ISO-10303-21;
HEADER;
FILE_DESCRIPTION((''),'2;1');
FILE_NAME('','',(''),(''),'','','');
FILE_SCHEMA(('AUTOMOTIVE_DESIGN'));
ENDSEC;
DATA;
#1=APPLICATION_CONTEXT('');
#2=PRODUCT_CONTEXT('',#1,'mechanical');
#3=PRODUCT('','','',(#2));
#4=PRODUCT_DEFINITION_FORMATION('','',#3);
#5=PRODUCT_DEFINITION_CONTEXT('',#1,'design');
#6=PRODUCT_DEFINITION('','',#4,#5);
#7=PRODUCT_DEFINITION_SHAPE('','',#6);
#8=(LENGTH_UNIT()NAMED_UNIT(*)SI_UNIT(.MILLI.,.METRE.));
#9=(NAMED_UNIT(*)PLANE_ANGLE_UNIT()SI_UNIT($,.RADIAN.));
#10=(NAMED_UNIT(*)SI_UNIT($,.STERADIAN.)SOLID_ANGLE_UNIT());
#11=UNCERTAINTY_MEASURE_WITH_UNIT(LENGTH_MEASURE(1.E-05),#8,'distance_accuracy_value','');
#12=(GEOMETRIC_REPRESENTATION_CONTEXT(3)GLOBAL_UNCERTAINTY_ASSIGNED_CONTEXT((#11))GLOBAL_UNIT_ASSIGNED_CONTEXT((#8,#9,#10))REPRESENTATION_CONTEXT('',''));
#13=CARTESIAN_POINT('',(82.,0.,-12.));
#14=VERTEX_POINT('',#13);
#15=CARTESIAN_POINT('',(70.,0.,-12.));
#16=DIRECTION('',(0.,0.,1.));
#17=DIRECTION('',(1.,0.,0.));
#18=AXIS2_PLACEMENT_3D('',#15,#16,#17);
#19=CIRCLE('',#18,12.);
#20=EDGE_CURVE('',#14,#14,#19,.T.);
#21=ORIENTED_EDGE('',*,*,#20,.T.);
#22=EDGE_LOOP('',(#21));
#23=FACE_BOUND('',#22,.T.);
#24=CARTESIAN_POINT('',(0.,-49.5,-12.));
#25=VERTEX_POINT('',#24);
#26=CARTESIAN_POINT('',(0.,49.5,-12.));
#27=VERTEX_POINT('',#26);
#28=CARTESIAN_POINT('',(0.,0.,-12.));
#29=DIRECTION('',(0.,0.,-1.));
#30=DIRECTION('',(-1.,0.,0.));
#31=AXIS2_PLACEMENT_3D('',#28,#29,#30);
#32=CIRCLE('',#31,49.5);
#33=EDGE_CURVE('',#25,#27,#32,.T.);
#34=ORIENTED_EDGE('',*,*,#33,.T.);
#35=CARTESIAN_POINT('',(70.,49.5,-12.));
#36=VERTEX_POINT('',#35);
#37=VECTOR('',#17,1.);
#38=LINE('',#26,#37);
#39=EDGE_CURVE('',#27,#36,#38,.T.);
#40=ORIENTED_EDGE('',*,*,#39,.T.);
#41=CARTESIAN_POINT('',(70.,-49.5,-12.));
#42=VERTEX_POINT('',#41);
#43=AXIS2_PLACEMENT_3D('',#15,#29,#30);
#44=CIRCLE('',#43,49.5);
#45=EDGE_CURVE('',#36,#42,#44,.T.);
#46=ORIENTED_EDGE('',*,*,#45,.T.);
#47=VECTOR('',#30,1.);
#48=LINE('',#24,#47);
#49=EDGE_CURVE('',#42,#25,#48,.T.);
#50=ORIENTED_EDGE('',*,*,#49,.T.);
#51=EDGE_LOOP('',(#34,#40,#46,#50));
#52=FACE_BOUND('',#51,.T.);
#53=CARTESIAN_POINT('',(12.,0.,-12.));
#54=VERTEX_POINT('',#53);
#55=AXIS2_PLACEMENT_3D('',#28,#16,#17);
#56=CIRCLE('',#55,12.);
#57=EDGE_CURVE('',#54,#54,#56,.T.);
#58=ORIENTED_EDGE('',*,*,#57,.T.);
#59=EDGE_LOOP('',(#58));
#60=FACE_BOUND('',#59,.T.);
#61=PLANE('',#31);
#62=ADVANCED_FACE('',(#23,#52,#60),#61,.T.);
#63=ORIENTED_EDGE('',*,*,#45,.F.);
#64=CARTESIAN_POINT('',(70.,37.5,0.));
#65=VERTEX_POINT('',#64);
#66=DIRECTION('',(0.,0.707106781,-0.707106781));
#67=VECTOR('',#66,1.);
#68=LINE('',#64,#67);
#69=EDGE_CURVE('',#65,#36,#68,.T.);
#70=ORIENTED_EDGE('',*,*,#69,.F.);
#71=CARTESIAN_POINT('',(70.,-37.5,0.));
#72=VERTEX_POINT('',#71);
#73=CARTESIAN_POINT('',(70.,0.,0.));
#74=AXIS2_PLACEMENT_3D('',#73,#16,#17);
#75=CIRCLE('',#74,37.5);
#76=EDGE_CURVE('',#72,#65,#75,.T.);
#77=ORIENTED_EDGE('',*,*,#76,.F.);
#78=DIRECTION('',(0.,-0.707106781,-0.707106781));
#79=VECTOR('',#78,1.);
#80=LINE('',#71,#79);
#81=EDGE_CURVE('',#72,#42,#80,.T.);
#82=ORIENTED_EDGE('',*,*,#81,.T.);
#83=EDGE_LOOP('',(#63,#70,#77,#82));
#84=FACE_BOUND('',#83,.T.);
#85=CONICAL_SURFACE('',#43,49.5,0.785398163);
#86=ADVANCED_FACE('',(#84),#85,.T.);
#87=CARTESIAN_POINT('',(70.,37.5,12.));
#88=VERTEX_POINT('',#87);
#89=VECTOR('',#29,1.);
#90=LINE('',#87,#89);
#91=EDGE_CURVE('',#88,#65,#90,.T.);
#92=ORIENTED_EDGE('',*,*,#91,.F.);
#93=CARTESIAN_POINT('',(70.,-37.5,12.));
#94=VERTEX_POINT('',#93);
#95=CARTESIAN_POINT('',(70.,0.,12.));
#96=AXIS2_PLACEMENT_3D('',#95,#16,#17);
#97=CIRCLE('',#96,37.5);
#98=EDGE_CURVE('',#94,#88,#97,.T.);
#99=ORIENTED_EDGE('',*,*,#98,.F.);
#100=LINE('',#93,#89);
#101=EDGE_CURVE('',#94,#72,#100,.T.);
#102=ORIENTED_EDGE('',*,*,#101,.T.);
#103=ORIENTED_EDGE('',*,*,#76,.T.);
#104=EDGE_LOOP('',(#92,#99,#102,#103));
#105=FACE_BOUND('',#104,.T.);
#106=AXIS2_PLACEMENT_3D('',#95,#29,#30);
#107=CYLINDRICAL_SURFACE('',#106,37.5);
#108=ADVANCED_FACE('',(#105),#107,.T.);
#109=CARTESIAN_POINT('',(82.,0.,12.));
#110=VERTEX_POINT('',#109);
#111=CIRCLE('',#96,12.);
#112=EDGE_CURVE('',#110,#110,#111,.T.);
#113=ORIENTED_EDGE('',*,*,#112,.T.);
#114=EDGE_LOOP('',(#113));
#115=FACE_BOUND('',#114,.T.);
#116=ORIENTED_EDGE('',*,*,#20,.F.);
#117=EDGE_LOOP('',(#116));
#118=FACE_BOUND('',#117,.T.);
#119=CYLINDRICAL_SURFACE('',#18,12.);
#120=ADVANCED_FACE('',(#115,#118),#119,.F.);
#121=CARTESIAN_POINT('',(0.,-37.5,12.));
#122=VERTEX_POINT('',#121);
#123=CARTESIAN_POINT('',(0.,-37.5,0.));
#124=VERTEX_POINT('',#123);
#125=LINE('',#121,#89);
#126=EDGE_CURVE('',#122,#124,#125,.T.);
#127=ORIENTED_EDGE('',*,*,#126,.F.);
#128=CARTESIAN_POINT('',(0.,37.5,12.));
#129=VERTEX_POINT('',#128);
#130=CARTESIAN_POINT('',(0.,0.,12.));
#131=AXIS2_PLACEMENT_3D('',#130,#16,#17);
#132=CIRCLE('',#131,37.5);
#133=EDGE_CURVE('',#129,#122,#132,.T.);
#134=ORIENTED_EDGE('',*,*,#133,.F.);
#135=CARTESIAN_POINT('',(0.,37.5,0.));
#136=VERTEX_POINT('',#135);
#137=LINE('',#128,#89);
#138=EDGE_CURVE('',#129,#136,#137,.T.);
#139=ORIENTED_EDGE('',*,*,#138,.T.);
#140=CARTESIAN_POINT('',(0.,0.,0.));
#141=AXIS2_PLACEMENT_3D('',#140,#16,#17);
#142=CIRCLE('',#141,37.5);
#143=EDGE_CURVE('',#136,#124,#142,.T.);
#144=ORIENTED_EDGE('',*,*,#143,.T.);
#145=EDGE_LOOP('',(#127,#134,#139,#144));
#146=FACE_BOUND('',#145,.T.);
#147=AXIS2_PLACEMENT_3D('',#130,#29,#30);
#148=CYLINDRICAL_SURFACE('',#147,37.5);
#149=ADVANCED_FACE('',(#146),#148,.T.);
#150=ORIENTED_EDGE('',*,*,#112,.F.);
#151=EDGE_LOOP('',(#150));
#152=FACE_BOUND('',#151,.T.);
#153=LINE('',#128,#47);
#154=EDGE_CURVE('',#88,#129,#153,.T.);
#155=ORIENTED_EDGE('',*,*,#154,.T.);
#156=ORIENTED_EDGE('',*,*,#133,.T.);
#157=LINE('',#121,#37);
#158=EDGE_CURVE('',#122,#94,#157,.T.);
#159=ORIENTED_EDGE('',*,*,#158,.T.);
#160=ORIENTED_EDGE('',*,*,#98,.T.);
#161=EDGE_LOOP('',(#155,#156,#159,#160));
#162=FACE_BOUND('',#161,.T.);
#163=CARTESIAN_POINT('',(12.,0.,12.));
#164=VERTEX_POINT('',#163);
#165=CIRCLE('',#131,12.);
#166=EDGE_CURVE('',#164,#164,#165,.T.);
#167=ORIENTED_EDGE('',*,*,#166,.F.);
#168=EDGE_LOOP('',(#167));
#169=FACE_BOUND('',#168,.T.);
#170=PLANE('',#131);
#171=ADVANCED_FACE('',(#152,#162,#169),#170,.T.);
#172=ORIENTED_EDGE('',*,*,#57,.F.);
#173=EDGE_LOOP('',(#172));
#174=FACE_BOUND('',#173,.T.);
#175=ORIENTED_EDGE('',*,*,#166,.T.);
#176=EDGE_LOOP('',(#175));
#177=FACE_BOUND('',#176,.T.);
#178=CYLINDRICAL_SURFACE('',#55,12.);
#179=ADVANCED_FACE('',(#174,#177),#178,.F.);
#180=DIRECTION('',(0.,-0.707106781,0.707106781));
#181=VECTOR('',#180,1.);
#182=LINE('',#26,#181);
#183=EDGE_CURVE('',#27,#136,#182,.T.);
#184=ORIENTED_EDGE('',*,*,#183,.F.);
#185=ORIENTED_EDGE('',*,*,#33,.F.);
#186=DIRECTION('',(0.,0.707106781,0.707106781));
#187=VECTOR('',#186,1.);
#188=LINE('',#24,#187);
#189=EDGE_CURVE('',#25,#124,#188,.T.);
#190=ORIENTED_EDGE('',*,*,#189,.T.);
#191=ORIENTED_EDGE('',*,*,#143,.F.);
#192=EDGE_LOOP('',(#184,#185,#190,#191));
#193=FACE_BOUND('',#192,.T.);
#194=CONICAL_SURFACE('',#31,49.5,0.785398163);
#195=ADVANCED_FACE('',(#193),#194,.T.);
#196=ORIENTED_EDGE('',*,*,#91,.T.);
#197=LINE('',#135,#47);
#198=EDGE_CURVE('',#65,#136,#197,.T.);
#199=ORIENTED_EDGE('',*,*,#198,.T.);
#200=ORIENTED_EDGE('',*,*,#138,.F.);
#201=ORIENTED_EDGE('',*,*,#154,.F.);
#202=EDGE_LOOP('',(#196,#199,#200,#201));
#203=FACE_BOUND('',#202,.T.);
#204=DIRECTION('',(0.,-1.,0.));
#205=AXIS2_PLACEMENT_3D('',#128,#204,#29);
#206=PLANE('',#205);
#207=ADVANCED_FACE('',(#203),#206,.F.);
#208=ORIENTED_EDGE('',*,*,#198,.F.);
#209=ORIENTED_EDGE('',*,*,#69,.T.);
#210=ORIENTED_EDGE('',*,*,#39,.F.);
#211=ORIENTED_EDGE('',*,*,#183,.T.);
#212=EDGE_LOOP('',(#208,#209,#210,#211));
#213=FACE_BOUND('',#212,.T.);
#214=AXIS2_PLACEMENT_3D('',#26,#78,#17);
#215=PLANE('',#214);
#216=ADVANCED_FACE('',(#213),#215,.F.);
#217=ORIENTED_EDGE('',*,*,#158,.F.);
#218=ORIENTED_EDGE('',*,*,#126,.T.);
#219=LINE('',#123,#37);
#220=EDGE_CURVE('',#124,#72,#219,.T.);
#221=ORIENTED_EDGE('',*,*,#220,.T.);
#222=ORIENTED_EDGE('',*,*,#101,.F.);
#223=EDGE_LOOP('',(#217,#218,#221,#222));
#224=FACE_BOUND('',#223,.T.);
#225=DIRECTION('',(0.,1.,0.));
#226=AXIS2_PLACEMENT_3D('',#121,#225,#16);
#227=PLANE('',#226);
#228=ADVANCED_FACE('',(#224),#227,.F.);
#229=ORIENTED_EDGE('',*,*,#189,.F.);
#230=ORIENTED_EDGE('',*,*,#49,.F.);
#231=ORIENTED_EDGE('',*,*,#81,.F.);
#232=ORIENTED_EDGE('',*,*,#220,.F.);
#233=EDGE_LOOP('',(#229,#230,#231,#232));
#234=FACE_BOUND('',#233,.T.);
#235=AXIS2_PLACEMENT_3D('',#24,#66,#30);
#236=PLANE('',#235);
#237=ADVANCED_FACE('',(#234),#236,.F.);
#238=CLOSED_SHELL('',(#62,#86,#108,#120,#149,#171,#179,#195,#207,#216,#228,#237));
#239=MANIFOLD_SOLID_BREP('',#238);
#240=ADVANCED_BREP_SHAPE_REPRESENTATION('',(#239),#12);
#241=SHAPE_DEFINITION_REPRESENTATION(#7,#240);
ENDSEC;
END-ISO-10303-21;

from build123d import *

# Parameters (mm, degrees)
BOSS_EXTRUDE1_DEPTH = 12
BOSS_EXTRUDE2_DEPTH = 12
CHAMFER1_SIZE       = 12
SKETCH3_R           = 12
CUT_EXTRUDE1_DEPTH  = 132.554171352


with BuildPart() as part:
    # Sketch1 → Boss-Extrude1 (new body)
    with BuildSketch(Plane.XY):
        with BuildLine():
            Line((0, 37.5), (70, 37.5))
            ThreePointArc((70, 37.5), (107.5, 0), (70, -37.5))
            Line((70, -37.5), (0, -37.5))
            ThreePointArc((0, -37.5), (-37.5, 0), (0, 37.5))
        make_face()
    extrude(amount=BOSS_EXTRUDE1_DEPTH)

    # Sketch2 → Boss-Extrude2 (add)
    with BuildSketch(Plane(origin=(0, 0, 0), x_dir=(-1, 0, 0), z_dir=(0, 0, -1))):
        with BuildLine():
            Line((0, -49.5), (-70, -49.5))
            ThreePointArc((-70, -49.5), (-119.5, 0), (-70, 49.5))
            Line((-70, 49.5), (0, 49.5))
            ThreePointArc((0, 49.5), (49.5, 0), (0, -49.5))
        make_face()
    extrude(amount=BOSS_EXTRUDE2_DEPTH)

    # Chamfer1
    chamfer1_edges = [part.edges().sort_by_distance(p)[0] for p in [
        (35, 49.5, 0),
        (119.5, 0, 0),
        (35, -49.5, 0),
        (-49.5, 0, 0),
    ]]
    chamfer(chamfer1_edges, length=CHAMFER1_SIZE - 0.0001)  # a hair under: the kernel refuses the full size

    # Sketch3 → Cut-Extrude1 (cut, through all)
    with BuildSketch(Plane.XY.offset(12)):
        Circle(SKETCH3_R)
        with Locations((70, 0)):
            Circle(SKETCH3_R)
    extrude(amount=-CUT_EXTRUDE1_DEPTH, mode=Mode.SUBTRACT)


solid = part.part
